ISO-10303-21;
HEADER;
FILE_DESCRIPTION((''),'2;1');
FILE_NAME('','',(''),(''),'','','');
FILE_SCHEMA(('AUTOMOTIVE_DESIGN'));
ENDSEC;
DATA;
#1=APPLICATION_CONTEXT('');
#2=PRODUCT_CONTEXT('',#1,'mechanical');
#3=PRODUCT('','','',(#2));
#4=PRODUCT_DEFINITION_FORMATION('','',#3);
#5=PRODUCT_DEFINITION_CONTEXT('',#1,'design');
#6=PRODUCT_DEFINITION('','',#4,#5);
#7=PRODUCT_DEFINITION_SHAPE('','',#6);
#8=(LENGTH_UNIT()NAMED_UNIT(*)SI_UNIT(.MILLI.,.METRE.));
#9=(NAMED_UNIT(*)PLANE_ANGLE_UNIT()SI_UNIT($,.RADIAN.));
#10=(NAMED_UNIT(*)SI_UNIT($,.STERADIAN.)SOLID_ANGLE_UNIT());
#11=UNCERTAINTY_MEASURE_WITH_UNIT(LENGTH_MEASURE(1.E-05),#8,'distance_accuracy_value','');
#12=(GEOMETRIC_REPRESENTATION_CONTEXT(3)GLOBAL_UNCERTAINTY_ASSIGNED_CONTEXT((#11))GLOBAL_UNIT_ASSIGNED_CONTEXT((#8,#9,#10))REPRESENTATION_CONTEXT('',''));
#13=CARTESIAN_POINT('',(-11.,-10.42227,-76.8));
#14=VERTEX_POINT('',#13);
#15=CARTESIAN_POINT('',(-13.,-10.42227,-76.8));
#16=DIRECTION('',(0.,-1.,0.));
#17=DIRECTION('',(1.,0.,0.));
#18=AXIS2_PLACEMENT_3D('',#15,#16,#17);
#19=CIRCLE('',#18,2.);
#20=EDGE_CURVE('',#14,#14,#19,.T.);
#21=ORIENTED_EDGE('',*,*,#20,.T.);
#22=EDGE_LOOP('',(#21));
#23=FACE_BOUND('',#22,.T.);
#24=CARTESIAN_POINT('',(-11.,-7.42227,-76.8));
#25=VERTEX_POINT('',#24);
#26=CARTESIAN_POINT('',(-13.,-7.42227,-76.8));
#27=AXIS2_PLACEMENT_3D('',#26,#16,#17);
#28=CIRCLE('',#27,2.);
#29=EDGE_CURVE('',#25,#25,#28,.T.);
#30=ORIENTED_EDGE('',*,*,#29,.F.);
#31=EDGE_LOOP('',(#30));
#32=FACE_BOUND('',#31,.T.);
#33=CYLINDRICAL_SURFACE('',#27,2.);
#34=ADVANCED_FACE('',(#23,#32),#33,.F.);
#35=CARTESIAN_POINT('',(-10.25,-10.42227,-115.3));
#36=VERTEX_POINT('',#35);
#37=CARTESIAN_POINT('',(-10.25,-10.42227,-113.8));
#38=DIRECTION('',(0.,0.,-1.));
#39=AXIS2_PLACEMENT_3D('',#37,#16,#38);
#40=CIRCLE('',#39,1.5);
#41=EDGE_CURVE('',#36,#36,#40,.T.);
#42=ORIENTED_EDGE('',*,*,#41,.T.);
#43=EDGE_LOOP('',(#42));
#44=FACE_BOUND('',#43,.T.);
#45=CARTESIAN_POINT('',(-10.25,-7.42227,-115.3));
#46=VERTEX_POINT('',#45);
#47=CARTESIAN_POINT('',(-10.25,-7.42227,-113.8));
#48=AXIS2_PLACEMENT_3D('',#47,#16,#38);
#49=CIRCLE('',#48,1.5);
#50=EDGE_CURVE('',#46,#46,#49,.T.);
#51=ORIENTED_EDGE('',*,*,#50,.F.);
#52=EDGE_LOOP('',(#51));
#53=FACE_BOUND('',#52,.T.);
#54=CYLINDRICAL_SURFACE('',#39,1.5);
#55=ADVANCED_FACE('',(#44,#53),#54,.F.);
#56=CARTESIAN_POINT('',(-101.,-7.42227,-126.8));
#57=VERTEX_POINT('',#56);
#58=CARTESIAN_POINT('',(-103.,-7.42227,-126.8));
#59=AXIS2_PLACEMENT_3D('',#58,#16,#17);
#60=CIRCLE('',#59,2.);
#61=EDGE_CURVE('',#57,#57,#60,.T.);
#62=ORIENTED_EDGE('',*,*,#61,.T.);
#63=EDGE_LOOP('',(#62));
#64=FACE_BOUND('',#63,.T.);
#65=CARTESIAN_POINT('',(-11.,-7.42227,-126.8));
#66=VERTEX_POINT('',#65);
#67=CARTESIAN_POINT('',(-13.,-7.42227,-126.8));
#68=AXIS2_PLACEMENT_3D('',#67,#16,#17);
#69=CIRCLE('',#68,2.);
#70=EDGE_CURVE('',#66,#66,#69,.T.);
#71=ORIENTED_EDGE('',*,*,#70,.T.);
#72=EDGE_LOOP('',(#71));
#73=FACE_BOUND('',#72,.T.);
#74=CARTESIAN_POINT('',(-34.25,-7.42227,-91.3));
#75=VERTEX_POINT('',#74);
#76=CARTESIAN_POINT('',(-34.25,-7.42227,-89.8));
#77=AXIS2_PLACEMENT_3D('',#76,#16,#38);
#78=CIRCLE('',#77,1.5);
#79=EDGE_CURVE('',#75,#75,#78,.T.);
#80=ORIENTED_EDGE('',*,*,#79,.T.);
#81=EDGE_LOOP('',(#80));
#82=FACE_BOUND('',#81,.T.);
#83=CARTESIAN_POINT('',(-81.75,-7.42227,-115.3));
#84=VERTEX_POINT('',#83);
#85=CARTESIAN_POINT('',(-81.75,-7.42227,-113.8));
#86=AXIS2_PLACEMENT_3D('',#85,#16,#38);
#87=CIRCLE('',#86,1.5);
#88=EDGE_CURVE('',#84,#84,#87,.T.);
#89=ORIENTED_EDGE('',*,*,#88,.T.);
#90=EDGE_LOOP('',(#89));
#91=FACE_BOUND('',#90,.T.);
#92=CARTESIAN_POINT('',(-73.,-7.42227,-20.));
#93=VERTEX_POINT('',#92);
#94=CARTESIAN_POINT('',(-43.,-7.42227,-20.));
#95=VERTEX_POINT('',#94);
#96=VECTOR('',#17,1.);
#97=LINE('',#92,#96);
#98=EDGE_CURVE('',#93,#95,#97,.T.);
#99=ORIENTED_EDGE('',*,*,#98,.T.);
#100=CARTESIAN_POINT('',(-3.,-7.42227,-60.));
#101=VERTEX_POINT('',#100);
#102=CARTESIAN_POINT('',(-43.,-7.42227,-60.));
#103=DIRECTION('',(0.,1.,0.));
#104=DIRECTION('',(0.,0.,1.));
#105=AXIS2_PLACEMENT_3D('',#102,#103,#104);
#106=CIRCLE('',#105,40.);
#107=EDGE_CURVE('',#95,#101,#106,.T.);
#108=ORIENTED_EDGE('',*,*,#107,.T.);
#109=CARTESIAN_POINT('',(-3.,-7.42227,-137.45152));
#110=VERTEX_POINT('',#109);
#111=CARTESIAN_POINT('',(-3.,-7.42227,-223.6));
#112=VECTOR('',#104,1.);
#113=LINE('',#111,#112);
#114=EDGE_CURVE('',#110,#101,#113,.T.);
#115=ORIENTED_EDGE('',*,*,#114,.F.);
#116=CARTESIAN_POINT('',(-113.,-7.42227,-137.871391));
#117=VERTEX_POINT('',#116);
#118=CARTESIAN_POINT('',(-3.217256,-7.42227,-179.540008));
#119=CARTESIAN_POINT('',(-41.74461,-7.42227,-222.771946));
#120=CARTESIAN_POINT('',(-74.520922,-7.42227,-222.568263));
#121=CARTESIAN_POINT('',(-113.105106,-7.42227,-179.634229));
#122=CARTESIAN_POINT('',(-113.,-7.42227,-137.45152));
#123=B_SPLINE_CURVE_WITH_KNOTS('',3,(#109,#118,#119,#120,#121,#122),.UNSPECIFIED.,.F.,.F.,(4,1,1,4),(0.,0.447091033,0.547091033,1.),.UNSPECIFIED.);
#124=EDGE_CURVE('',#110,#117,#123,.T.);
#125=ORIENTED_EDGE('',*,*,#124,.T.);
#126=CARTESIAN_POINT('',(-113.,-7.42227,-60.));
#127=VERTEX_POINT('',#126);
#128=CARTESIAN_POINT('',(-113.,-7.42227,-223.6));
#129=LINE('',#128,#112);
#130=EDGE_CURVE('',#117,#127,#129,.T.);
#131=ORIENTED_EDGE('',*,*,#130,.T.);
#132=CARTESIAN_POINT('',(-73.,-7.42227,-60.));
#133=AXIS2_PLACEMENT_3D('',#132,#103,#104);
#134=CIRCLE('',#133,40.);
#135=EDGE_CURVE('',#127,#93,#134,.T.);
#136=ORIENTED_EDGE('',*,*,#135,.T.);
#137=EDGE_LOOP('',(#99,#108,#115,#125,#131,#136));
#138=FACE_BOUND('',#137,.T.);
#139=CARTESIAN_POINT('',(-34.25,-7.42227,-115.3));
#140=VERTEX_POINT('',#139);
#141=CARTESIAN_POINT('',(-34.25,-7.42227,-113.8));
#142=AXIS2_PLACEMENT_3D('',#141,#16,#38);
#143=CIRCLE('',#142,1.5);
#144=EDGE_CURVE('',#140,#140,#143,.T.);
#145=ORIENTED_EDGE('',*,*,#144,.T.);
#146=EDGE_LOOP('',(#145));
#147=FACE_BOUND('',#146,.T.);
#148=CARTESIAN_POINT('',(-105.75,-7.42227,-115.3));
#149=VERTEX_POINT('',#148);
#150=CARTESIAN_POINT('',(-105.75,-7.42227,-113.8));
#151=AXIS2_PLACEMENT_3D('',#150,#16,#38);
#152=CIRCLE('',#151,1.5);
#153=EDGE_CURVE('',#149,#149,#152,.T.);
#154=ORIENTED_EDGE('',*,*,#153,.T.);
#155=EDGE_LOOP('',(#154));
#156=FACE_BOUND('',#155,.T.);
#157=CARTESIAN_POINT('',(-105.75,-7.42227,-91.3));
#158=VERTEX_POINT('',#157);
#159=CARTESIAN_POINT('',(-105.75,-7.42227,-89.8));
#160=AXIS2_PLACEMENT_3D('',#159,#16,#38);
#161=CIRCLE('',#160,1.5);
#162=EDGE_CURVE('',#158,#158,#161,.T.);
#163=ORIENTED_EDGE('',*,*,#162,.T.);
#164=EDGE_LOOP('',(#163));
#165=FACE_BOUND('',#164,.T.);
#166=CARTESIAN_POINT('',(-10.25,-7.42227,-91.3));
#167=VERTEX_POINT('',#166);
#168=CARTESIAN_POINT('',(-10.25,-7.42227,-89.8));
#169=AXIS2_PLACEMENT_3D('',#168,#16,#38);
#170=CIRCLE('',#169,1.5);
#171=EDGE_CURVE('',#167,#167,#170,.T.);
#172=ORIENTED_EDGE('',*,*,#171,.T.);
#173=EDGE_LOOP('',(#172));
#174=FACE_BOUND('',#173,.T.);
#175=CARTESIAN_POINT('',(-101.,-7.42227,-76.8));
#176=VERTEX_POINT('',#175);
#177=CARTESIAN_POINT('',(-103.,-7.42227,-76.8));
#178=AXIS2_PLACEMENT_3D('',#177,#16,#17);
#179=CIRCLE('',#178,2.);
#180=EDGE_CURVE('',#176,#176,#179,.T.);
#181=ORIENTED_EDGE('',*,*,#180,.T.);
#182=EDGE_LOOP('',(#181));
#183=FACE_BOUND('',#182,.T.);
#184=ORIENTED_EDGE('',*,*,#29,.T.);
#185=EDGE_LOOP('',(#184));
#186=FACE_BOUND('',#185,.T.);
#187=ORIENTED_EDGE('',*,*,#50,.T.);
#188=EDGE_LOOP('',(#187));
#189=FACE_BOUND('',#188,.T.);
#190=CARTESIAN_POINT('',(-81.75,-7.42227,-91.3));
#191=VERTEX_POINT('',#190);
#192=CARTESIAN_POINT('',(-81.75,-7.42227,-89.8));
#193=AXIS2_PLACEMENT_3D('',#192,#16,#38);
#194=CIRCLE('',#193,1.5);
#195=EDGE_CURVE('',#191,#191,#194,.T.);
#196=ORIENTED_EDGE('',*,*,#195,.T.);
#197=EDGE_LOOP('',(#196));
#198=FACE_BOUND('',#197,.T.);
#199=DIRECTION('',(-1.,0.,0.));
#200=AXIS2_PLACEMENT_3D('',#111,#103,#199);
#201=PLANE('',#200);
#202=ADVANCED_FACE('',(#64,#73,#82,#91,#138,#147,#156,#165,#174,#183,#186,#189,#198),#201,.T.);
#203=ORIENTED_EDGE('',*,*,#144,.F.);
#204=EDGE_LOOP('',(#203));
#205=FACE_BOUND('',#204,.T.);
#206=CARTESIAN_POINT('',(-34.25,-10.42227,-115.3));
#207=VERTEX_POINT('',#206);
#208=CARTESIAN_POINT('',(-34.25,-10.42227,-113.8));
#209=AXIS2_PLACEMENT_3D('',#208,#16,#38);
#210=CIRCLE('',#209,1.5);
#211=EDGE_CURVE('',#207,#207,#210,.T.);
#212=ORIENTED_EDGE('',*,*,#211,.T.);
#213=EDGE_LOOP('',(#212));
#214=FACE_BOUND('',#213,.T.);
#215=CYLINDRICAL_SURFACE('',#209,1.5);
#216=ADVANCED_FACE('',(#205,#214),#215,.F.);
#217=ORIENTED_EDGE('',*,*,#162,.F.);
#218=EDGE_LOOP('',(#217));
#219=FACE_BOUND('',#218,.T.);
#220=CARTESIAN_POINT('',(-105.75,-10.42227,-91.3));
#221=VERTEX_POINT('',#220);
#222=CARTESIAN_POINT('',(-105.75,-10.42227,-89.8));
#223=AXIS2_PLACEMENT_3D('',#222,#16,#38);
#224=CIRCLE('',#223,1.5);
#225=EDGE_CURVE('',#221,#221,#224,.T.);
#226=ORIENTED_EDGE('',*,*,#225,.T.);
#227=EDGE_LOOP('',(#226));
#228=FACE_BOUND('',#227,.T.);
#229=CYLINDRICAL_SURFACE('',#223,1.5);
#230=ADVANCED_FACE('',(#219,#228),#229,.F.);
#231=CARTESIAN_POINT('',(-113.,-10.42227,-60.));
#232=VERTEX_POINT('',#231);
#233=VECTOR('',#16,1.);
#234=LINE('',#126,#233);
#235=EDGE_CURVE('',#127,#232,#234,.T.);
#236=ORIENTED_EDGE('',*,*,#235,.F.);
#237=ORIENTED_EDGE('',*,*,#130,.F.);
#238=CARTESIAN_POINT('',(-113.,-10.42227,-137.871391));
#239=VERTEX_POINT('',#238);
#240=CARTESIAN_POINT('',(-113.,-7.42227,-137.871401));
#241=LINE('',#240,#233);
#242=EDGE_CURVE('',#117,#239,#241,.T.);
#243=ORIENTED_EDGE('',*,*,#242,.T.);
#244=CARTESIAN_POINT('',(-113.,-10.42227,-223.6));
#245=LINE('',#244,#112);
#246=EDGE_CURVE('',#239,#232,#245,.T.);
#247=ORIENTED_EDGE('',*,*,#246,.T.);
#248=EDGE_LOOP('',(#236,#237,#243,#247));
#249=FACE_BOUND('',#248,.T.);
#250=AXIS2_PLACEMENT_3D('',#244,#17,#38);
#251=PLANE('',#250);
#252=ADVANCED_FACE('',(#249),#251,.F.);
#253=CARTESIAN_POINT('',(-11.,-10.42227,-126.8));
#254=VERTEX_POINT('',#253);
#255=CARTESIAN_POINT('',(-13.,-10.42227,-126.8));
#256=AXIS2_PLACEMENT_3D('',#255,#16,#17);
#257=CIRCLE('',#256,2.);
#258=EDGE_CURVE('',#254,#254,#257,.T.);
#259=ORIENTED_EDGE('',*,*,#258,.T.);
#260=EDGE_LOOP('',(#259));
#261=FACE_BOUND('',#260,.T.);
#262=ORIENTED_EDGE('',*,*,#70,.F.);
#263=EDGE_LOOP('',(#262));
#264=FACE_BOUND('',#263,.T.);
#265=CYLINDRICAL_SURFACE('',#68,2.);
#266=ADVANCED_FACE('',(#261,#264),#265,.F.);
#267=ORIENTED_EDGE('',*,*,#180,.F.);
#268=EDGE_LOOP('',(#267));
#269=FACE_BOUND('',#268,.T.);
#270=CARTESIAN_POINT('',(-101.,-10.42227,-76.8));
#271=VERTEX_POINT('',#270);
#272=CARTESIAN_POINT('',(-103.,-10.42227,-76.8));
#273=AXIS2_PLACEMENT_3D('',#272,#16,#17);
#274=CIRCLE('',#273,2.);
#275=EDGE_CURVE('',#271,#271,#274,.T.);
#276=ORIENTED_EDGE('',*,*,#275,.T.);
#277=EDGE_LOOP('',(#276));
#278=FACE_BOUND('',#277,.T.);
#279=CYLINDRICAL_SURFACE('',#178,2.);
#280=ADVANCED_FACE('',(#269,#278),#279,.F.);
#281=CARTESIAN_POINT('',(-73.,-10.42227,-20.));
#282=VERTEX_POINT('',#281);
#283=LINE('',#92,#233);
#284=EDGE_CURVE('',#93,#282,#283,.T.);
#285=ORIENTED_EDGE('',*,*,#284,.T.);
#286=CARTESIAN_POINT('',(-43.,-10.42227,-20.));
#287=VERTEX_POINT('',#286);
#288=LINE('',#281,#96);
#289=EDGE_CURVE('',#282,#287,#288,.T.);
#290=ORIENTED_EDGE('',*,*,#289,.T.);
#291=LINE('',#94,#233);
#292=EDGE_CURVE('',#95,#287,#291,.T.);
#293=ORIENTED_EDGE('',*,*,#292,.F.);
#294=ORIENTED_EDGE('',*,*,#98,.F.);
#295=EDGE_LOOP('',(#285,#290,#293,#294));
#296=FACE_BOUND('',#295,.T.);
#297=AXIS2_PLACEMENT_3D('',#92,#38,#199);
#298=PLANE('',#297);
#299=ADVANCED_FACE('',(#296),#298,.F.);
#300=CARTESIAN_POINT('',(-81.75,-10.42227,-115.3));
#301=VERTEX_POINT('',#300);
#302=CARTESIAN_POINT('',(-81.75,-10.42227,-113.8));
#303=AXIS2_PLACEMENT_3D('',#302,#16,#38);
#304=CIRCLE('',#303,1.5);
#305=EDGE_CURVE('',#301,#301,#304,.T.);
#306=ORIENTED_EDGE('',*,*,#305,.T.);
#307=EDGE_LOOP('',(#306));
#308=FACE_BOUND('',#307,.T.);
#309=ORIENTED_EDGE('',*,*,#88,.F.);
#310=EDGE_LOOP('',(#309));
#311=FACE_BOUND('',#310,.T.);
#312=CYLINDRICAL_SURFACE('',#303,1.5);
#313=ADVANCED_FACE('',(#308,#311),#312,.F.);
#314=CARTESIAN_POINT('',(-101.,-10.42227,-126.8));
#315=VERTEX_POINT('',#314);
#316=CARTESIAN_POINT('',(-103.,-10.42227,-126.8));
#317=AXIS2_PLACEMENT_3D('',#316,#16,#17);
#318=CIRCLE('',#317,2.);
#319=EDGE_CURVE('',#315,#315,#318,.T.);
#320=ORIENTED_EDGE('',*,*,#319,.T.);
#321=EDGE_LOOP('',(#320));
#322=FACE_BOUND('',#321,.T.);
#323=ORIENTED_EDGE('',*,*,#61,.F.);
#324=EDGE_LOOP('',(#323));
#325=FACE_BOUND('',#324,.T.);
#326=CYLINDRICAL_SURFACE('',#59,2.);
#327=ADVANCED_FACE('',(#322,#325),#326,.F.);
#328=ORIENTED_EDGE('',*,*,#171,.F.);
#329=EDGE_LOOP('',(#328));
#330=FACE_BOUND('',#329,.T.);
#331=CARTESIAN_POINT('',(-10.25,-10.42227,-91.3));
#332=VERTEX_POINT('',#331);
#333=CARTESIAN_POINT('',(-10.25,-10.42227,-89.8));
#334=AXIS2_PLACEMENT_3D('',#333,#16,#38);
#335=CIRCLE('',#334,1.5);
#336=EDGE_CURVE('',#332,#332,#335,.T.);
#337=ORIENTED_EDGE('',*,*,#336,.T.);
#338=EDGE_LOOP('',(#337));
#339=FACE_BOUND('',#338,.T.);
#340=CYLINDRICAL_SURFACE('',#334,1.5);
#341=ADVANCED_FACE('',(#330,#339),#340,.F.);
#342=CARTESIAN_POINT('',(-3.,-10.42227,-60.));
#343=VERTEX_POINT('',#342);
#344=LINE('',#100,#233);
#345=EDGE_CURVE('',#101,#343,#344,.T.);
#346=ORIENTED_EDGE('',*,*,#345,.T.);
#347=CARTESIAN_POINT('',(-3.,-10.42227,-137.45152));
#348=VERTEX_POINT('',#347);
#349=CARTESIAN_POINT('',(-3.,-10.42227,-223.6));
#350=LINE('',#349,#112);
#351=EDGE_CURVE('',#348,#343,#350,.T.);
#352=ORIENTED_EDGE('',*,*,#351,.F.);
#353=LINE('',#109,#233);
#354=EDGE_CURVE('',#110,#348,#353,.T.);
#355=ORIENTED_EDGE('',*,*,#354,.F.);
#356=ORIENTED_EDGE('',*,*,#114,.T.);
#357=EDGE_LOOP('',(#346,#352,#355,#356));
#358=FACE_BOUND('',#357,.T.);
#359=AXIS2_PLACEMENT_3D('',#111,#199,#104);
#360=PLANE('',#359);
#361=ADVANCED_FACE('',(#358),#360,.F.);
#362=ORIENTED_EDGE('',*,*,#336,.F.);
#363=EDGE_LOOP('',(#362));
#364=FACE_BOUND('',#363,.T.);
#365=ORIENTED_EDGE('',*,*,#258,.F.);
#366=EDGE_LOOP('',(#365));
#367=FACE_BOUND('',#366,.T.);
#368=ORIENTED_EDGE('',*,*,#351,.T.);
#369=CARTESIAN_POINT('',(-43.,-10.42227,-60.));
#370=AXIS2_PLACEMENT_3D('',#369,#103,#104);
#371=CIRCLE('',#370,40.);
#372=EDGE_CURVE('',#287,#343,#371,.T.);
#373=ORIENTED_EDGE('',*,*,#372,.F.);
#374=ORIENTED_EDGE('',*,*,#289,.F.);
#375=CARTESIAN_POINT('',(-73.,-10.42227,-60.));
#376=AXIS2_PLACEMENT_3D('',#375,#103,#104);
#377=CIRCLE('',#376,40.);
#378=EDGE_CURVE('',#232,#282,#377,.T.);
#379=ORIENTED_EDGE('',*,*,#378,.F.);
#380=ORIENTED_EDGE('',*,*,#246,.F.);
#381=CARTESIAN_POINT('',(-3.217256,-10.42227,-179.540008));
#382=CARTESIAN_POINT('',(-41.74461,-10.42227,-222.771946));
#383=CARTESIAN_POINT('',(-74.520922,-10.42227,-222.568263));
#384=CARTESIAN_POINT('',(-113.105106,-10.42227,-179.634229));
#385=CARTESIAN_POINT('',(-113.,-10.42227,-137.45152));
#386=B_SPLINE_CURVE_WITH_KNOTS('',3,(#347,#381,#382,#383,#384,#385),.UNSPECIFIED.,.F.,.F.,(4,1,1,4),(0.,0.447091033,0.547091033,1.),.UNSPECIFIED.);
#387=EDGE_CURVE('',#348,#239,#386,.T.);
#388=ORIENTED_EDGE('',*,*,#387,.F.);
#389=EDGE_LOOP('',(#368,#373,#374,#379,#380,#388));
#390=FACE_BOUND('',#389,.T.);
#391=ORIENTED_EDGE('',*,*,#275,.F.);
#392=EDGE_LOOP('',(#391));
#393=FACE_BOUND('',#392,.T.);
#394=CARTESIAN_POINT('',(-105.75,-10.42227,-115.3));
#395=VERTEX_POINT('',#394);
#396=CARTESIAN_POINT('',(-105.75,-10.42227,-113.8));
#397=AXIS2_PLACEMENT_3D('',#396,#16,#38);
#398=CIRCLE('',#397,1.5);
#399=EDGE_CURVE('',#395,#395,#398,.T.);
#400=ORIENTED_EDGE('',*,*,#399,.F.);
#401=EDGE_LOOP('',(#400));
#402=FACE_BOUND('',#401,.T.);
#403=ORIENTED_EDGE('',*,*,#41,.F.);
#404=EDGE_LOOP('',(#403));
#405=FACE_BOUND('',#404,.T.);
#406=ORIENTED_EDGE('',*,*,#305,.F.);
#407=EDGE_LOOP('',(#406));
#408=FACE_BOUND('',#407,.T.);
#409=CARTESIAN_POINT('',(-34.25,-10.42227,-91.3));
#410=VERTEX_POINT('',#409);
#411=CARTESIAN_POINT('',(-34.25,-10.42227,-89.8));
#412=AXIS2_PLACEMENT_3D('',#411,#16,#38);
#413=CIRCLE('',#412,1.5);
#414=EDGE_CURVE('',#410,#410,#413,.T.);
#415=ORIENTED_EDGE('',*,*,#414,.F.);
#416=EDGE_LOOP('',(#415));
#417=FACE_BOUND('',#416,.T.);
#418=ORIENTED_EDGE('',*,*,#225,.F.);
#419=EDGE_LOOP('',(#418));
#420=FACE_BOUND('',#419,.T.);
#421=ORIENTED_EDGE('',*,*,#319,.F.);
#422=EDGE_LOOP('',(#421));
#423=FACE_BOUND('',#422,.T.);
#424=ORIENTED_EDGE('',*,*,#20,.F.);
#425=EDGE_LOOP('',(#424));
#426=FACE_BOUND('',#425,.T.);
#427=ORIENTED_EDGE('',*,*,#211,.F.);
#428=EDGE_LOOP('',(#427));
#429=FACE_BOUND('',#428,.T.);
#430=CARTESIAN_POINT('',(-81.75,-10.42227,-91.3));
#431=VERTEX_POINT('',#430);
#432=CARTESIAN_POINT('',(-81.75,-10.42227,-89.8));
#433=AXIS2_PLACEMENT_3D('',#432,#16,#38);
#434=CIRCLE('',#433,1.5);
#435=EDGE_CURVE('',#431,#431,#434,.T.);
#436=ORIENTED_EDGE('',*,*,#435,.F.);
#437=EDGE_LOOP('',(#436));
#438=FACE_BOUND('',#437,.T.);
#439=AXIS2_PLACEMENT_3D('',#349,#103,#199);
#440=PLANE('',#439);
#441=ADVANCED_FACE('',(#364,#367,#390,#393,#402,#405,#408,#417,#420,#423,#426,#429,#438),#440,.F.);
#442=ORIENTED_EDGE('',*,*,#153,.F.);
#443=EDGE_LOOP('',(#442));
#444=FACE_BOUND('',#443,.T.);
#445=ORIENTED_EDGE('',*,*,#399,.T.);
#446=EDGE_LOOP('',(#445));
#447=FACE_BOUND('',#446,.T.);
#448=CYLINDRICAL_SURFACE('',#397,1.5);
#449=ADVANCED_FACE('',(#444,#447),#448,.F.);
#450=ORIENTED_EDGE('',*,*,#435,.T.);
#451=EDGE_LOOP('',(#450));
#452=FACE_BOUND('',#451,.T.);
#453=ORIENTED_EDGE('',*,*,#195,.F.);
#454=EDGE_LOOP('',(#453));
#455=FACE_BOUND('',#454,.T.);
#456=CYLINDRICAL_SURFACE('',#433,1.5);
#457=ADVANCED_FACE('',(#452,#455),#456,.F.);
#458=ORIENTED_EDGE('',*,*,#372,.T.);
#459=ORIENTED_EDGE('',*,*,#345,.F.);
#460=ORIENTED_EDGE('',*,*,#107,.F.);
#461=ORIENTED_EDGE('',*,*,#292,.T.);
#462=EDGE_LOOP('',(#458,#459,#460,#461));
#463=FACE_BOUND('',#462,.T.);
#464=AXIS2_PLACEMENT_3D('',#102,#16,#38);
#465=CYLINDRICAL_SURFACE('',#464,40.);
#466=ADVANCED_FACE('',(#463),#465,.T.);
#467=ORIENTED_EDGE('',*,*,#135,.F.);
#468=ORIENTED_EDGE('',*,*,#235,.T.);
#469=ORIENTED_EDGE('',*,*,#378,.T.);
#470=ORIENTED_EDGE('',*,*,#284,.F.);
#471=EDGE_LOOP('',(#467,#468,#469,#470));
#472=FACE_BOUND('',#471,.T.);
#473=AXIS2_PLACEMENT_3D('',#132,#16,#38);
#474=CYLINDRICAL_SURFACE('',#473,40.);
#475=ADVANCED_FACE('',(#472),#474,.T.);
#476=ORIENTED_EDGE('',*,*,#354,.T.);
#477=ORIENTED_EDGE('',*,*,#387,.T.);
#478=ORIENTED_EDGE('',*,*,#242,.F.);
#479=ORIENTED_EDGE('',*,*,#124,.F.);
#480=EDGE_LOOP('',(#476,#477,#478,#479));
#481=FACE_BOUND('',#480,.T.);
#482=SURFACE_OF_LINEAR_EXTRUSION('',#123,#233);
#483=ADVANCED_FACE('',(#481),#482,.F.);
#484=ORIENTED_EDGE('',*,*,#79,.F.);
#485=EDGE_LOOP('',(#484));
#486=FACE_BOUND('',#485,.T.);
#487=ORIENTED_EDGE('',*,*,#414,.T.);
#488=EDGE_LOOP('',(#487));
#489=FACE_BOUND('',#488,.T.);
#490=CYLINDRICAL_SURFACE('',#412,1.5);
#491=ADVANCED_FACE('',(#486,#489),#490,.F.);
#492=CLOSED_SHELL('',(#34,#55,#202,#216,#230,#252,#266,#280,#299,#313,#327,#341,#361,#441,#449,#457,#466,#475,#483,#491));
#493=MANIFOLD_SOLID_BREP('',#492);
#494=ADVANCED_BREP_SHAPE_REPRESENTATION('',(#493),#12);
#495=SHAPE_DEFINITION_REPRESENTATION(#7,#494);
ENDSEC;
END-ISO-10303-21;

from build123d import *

# Parameters (mm, degrees)
SKETCH1_W             = 110
SKETCH1_H             = 3
BASE_FLANGE1_DEPTH    = 223.6
EXTRUDE1_START        = -3
EXTRUDE1_DEPTH        = 3
SKETCH10_R            = 2
CUT_EXTRUDE1_DEPTH    = 250.402876475
M3X0_5_TAPPED_HOLE1_D = 3


# Read off the part's stored shape, not the designer's step: Extrude1
# Sheet-metal steps are written as plain solids
with BuildPart() as part:
    # Sketch1 → Base-Flange1 (new body)
    with BuildSketch(Plane.XY):
        with Locations((-58, -8.92226979)):
            Rectangle(SKETCH1_W, SKETCH1_H)
    extrude(amount=-BASE_FLANGE1_DEPTH)

    # Extrude1 outline → Extrude1 (cut)
    with BuildSketch(Plane.XZ.offset(10.42226979).offset(EXTRUDE1_START)):
        with BuildLine():
            Line((-3, -223.6), (-3, -137.451520334))
            add(Edge.make_bspline(
                [(-3, -137.451520334), (-3.217256351, -179.540007851), (-41.744610068, -222.771946497), (-74.471641553, -222.568569391), (-112.895413513, -179.867413692), (-113.000000023, -137.871391115)],
                knots=[0, 0, 0, 0, 0.447091033, 0.547091033, 0.998496472, 0.998496472, 0.998496472, 0.998496472], degree=3))
            Line((-113.000000023, -137.871391115), (-113, -223.6))
            Line((-113, -223.6), (-3, -223.6))
        make_face()
        with BuildLine():
            ThreePointArc((-43, -20), (-14.715728753, -31.715728753), (-3, -60))
            Line((-3, -60), (-3, 0))
            Line((-3, 0), (-113, 0))
            Line((-113, 0), (-113, -60))
            ThreePointArc((-113, -60), (-101.284271247, -31.715728753), (-73, -20))
            Line((-73, -20), (-43, -20))
        make_face()
    extrude(amount=EXTRUDE1_DEPTH, mode=Mode.SUBTRACT)

    # Sketch10 → Cut-Extrude1 (cut, through all)
    with BuildSketch(Plane.XZ.offset(10.42226979)):
        with Locations((-13, -126.8)):
            Circle(SKETCH10_R)
        with Locations((-13, -76.8)):
            Circle(SKETCH10_R)
        with Locations((-103, -126.8)):
            Circle(SKETCH10_R)
        with Locations((-103, -76.8)):
            Circle(SKETCH10_R)
    extrude(amount=-CUT_EXTRUDE1_DEPTH, mode=Mode.SUBTRACT)

    # M3x0.5 Tapped Hole1 (through all)
    with Locations(Plane(origin=(-105.75, -10.42226979, -89.8), x_dir=(0, 0, -1), z_dir=(0, -1, 0))):
        with Locations((0, 0), (24, 0), (24, 24), (0, 24), (0, 71.5), (24, 71.5), (24, 95.5), (0, 95.5)):
            Hole(M3X0_5_TAPPED_HOLE1_D / 2)


solid = part.part
